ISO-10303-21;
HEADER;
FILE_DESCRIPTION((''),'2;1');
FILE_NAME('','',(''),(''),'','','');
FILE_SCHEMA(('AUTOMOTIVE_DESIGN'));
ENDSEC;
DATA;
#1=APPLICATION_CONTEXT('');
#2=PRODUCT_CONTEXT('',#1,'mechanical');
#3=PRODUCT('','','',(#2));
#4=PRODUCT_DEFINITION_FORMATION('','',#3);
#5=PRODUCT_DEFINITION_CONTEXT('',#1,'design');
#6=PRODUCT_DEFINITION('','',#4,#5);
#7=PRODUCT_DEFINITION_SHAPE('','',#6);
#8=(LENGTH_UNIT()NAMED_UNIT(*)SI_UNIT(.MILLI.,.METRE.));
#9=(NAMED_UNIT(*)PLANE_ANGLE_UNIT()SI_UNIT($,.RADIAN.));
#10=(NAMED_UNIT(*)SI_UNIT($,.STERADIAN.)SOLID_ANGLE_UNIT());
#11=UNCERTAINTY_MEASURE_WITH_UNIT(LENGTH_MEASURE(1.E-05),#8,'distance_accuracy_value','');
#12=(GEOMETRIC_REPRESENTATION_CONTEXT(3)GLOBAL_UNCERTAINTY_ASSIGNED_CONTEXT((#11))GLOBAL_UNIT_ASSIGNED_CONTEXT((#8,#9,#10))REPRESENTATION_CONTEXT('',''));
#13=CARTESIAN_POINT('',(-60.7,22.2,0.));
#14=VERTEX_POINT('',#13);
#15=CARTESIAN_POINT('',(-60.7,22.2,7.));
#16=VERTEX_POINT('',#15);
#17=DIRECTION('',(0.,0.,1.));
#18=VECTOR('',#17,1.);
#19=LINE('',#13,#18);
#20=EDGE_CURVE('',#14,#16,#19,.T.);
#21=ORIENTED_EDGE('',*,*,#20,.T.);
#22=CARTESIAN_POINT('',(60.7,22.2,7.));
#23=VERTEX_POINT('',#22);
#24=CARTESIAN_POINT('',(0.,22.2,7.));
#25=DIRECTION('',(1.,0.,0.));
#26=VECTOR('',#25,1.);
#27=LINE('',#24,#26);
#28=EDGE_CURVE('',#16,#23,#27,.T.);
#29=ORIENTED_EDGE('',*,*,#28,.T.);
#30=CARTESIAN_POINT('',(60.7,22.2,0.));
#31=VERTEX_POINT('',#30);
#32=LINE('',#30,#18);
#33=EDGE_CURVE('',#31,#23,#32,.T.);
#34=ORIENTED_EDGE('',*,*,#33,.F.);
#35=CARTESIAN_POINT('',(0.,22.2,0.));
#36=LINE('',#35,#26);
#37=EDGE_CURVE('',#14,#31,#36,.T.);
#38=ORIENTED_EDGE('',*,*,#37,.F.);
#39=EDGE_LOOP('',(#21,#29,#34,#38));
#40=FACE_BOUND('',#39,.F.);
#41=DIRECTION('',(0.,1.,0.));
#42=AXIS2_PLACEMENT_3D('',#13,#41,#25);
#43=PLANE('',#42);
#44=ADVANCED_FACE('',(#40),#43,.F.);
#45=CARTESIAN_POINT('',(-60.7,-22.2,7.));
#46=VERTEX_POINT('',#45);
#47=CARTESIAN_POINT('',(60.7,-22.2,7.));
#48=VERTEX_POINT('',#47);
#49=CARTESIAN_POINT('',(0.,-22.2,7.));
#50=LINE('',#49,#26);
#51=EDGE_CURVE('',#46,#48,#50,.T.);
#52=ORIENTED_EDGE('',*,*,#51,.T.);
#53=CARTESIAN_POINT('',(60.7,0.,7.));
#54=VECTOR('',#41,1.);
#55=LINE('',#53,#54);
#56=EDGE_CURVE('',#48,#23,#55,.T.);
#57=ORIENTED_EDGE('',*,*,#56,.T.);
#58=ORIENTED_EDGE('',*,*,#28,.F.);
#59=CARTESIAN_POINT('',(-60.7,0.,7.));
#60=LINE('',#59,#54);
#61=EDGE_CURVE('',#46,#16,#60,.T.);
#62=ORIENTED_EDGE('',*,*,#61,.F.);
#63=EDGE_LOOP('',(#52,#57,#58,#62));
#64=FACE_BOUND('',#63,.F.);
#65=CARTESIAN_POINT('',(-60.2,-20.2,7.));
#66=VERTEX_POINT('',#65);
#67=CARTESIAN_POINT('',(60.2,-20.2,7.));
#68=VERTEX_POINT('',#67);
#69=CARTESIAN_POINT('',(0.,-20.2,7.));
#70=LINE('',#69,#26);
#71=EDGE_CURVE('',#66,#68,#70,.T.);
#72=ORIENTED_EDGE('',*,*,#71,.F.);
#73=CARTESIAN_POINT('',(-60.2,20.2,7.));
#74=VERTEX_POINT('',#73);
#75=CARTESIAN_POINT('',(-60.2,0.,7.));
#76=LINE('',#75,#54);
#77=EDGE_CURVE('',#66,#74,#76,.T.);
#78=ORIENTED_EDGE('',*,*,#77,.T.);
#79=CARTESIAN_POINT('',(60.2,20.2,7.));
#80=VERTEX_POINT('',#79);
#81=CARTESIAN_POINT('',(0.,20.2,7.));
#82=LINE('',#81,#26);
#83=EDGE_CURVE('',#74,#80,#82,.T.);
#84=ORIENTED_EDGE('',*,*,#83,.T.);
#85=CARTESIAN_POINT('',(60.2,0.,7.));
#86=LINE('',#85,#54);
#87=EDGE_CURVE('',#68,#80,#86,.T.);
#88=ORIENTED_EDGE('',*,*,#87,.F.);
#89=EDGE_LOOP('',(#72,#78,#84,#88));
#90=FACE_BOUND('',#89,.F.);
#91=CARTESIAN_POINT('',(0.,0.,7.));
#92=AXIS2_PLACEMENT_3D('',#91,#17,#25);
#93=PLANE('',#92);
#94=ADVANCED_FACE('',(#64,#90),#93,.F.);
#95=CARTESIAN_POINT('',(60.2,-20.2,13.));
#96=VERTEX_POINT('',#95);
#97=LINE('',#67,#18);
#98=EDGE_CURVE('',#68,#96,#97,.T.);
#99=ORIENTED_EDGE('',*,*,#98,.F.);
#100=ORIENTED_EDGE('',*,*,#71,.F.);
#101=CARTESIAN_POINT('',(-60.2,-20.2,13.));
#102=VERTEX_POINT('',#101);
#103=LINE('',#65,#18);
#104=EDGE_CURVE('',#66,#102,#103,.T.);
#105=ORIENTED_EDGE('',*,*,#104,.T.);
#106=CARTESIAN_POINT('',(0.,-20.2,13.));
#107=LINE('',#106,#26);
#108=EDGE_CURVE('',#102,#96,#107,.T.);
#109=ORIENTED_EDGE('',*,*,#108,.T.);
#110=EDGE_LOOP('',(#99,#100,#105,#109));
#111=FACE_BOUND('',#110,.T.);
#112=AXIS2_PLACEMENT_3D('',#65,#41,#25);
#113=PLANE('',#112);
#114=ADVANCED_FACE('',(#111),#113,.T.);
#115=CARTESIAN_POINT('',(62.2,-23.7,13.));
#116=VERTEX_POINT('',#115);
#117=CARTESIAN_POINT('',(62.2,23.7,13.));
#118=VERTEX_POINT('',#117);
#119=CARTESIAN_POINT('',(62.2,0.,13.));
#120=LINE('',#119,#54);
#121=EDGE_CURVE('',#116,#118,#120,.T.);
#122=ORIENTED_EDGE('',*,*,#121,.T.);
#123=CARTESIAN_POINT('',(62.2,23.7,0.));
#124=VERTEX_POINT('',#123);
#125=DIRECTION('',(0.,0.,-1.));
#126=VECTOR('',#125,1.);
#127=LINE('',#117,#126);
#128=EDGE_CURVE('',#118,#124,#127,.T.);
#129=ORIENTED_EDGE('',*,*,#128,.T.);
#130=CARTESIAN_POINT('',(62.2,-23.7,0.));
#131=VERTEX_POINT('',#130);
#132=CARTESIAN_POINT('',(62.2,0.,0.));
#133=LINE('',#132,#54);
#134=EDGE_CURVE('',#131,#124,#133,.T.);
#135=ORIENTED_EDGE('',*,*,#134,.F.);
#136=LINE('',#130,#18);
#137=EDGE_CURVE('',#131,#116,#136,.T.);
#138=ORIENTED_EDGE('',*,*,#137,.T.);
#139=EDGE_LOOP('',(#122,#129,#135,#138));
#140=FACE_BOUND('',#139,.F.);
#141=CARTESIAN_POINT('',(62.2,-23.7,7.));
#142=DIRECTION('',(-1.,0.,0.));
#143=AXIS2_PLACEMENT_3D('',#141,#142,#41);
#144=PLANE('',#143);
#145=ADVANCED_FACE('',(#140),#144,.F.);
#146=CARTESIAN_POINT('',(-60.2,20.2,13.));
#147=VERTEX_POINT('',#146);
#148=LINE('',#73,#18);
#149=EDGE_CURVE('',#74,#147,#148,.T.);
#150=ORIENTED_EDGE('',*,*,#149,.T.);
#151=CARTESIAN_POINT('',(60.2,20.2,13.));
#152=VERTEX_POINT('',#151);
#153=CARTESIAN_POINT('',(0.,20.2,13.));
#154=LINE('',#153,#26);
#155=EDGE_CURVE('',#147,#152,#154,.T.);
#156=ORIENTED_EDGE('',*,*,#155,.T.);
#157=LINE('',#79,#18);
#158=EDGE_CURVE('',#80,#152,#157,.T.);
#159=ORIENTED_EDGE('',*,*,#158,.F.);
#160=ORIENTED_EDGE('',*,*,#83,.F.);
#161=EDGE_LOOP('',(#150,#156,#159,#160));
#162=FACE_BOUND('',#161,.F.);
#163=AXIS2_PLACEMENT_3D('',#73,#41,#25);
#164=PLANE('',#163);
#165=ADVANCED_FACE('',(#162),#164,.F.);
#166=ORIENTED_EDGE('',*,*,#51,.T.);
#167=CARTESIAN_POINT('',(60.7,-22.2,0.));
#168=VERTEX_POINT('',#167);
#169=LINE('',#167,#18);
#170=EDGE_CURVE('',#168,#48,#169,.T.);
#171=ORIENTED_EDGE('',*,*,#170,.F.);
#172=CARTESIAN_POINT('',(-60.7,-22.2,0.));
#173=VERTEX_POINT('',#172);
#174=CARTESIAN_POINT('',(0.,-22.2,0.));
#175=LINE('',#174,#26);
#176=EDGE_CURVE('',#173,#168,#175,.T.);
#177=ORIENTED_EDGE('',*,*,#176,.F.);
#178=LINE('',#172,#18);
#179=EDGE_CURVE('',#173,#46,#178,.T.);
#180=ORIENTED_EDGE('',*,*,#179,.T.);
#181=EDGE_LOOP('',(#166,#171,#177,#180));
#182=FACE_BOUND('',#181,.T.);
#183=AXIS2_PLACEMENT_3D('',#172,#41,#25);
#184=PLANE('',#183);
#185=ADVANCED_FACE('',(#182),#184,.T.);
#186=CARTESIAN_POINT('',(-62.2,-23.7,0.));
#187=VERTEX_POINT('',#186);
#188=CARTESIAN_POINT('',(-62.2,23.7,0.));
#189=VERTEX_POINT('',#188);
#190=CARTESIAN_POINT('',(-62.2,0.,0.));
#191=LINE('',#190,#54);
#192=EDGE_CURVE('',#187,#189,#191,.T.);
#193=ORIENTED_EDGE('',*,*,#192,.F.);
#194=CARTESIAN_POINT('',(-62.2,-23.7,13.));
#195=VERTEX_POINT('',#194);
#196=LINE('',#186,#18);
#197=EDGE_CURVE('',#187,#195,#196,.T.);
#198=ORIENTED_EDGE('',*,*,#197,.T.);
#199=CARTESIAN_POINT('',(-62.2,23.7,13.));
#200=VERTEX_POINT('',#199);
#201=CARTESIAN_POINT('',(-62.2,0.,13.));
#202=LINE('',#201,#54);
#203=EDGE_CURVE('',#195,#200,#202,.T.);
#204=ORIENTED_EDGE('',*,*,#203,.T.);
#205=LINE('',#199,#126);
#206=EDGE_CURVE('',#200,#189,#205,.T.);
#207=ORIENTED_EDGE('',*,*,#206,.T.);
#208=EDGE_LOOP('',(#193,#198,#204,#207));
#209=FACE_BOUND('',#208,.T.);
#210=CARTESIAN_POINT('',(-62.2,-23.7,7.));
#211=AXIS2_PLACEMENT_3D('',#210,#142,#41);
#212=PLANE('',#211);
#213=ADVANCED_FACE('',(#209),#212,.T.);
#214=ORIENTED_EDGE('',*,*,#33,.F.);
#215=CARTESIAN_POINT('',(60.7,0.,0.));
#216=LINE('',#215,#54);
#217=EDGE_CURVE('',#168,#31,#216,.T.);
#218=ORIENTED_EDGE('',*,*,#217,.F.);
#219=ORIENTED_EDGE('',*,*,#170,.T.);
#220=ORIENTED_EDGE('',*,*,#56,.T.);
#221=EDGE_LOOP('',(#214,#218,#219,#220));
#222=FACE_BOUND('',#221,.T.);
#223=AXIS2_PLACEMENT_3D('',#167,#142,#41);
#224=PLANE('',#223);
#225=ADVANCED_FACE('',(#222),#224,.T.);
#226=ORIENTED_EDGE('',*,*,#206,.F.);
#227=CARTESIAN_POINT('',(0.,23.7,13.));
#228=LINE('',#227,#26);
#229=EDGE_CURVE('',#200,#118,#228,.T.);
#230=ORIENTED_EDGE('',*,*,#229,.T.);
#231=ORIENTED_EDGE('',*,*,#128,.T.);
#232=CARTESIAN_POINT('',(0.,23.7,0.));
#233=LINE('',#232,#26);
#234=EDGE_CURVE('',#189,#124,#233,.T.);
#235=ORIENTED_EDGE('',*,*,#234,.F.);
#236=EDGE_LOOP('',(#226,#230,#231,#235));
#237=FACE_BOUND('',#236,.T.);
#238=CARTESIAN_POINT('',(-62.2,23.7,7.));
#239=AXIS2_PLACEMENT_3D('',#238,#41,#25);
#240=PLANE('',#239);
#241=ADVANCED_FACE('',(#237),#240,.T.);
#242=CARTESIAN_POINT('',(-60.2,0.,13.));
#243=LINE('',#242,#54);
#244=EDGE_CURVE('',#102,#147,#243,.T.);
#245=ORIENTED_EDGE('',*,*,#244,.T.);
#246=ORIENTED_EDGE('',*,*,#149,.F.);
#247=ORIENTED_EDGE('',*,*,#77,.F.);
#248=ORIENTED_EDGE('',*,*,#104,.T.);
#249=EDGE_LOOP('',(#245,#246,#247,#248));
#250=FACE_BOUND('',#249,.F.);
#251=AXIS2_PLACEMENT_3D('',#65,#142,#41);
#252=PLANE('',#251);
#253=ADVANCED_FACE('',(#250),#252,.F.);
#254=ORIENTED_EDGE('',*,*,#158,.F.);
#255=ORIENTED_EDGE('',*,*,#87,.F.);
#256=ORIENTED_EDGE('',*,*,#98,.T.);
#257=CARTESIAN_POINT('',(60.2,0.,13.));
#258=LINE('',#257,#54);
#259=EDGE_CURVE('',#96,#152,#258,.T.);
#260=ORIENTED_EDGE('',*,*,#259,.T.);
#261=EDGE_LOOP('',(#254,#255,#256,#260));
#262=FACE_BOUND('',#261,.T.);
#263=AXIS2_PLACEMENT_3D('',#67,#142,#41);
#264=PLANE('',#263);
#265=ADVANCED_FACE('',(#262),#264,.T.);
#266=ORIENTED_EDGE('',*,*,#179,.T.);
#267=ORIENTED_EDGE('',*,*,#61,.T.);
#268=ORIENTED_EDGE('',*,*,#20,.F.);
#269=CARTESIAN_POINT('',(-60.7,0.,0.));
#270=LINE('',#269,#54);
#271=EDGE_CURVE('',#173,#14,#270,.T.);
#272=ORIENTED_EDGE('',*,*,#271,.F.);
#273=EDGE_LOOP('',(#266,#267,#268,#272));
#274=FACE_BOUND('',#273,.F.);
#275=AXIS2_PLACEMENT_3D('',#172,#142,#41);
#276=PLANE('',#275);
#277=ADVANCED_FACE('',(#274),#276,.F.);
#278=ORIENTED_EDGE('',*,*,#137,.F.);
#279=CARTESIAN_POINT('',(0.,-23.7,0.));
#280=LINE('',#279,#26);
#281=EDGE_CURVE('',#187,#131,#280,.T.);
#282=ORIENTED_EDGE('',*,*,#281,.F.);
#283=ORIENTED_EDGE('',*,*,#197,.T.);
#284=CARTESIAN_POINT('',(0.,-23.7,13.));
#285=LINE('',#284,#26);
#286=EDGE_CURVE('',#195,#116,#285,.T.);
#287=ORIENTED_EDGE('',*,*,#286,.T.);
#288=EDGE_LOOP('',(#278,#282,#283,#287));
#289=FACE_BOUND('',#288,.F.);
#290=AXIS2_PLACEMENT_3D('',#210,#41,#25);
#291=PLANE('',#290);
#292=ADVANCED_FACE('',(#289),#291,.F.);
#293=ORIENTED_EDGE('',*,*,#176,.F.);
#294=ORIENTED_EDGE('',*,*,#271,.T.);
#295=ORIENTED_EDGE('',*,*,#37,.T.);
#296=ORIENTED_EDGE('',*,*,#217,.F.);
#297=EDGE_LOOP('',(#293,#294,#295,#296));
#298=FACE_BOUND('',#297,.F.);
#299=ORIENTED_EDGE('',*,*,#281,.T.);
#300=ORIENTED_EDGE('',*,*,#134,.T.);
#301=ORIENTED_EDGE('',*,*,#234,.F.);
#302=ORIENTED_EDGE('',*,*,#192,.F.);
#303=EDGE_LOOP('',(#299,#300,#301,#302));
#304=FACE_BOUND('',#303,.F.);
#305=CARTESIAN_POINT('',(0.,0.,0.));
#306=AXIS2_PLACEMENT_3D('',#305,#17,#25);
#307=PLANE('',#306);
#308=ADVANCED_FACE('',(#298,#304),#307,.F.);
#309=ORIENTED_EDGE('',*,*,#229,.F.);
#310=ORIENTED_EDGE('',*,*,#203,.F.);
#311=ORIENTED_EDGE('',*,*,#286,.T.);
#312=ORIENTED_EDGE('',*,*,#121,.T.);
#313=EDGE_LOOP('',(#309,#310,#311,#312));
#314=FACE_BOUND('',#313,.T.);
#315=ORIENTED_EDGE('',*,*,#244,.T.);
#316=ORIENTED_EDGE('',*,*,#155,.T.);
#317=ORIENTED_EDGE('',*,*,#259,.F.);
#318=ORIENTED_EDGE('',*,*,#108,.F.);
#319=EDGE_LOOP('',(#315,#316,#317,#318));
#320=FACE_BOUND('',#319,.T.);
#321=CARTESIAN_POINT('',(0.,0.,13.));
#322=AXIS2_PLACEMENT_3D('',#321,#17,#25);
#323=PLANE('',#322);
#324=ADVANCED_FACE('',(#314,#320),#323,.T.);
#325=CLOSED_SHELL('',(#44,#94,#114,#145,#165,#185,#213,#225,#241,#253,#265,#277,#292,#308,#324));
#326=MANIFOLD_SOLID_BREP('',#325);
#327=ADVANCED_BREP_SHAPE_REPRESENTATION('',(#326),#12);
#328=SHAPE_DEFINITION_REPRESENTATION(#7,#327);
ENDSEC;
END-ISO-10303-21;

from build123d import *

# Parameters (mm, degrees)
F0_W     = 124.4
F0_H     = 47.4
F0_W_2   = 121.4
F0_H_2   = 44.4
F1_DEPTH = 7
F2_W     = 124.4
F2_H     = 47.4
F2_W_2   = 121.4
F2_H_2   = 44.4
F2_W_3   = 120.4
F2_H_3   = 40.4
F3_DEPTH = 6


with BuildPart() as f1:
    # F0 (on Top) → F1 (new body)
    with BuildSketch(Plane.XY):
        Rectangle(F0_W, F0_H)
        Rectangle(F0_W_2, F0_H_2, mode=Mode.SUBTRACT)
    extrude(amount=F1_DEPTH)

    # F2 (on face) → F3 (join)
    with BuildSketch(Plane.XY.offset(7)):
        Rectangle(F2_W, F2_H)
        Rectangle(F2_W_2, F2_H_2, mode=Mode.SUBTRACT)
        Rectangle(F2_W_2, F2_H_2)
        Rectangle(F2_W_3, F2_H_3, mode=Mode.SUBTRACT)
    extrude(amount=F3_DEPTH)


solid = f1.part
